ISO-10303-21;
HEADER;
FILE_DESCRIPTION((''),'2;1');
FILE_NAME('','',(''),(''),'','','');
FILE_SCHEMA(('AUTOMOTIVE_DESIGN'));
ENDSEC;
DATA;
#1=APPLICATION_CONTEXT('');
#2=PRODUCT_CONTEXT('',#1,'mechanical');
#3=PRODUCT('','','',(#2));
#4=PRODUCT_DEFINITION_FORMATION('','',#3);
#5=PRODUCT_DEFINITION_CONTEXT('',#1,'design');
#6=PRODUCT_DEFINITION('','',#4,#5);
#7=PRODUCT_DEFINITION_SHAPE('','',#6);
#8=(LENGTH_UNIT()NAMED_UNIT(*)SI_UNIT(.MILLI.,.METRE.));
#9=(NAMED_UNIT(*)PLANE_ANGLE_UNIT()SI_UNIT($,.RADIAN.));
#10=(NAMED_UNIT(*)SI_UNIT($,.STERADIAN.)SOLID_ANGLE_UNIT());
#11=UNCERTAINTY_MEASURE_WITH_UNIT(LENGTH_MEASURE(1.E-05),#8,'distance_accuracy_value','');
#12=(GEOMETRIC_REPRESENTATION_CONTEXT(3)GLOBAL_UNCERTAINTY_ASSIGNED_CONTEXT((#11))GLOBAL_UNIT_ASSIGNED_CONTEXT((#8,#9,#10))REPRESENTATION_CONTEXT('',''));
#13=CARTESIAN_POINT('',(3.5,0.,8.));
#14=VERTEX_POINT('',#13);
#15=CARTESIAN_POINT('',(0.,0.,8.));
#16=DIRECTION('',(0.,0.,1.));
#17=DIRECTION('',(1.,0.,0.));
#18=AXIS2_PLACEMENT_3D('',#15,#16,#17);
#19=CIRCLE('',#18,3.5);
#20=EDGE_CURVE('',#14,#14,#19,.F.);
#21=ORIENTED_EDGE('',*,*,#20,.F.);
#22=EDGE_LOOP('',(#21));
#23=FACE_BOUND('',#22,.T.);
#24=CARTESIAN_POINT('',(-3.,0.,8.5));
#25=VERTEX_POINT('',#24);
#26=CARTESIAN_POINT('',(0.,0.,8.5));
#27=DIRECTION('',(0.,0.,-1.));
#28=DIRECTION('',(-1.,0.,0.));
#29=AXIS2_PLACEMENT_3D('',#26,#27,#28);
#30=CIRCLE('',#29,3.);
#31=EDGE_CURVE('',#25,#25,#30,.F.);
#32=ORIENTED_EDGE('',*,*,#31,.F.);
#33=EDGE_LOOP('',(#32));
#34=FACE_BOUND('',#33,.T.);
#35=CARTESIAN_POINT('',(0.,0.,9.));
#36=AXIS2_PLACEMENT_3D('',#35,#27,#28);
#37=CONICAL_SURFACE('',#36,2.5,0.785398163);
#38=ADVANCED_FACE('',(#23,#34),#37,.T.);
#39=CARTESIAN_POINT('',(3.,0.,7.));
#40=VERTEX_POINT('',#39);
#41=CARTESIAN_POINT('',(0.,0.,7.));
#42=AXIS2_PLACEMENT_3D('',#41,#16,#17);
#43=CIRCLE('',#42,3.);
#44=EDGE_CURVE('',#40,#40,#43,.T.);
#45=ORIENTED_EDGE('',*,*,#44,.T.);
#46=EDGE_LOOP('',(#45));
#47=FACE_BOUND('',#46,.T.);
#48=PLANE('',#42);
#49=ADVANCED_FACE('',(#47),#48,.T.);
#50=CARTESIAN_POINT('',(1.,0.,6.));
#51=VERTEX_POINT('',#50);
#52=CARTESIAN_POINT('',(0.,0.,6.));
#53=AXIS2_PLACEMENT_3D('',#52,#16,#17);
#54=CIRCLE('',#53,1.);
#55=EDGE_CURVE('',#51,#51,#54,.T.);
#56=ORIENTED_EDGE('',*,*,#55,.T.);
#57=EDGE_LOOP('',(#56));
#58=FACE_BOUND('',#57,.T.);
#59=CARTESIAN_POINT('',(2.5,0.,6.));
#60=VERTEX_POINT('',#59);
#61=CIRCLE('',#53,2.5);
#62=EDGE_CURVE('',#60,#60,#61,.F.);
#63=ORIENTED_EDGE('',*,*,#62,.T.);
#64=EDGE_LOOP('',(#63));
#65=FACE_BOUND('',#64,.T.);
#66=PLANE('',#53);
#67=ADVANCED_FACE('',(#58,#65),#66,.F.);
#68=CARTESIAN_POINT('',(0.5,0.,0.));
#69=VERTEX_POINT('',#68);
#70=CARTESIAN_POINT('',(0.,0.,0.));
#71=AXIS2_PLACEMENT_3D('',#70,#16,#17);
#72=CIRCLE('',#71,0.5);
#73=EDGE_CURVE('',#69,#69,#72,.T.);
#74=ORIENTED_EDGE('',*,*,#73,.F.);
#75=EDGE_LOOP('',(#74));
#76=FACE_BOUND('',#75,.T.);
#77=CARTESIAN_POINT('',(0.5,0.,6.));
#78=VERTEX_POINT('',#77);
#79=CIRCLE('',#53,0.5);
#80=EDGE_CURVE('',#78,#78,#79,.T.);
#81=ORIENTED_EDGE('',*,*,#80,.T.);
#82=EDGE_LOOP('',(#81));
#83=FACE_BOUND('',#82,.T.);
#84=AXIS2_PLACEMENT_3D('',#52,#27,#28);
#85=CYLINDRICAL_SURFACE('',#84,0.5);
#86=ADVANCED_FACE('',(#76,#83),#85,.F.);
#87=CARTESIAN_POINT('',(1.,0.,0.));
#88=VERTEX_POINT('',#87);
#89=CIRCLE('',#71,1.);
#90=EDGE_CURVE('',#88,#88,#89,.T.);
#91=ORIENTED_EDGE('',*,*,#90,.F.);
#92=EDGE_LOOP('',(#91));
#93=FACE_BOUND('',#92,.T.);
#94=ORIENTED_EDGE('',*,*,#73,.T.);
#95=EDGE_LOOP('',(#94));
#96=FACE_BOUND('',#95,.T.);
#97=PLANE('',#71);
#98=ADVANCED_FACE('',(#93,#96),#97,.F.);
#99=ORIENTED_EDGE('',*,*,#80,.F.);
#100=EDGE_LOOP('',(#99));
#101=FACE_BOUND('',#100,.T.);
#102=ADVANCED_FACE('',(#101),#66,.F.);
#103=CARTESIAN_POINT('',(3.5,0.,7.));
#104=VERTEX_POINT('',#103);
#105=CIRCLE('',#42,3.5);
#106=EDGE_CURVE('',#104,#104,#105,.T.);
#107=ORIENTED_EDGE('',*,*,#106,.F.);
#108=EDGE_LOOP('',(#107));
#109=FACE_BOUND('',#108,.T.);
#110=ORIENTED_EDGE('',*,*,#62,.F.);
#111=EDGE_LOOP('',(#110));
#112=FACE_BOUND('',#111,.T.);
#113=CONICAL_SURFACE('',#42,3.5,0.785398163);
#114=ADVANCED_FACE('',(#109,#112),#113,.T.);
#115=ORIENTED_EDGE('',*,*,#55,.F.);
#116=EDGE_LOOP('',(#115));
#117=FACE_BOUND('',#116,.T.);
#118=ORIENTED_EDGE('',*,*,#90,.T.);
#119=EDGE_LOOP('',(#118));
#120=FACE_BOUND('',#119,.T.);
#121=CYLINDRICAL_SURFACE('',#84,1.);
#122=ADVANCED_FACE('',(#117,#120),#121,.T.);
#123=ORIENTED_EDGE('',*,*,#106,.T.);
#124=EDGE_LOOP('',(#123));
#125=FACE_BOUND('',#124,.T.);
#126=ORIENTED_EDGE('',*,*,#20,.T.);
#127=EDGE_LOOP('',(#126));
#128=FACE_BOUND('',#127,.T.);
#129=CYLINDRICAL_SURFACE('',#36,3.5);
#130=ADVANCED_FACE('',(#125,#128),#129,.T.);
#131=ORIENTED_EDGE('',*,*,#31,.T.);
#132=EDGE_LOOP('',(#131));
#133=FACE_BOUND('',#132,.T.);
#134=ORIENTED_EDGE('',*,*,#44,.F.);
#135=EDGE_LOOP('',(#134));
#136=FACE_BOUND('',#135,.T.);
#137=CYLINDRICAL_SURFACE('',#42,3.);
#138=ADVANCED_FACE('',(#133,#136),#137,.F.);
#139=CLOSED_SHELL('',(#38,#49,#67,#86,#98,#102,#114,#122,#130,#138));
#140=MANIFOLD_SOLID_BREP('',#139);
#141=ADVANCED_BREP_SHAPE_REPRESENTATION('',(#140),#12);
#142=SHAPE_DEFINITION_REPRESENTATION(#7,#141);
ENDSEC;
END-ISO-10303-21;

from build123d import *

# Parameters (mm, degrees)
ESBO_O1_R                = 1
ESBO_O1_R_2              = 0.5
RESSALTO_EXTRUS_O1_DEPTH = 6
ESBO_O3_R                = 3.5
RESSALTO_EXTRUS_O2_DEPTH = 3
ESBO_O4_R                = 3
CORTE_EXTRUS_O1_DEPTH    = 2
CHANFRO1_SIZE            = 1


with BuildPart() as part:
    # Esboço1 → Ressalto-extrusão1 (new body)
    with BuildSketch(Plane.XY):
        Circle(ESBO_O1_R)
        Circle(ESBO_O1_R_2, mode=Mode.SUBTRACT)
    extrude(amount=RESSALTO_EXTRUS_O1_DEPTH)

    # Esboço3 → Ressalto-extrusão2 (add)
    with BuildSketch(Plane.XY.offset(6)):
        Circle(ESBO_O3_R)
    extrude(amount=RESSALTO_EXTRUS_O2_DEPTH)

    # Esboço4 → Corte-extrusão1 (cut)
    with BuildSketch(Plane.XY.offset(9)):
        Circle(ESBO_O4_R)
    extrude(amount=-CORTE_EXTRUS_O1_DEPTH, mode=Mode.SUBTRACT)

    # Chanfro1
    # the kernel refuses this chamfer: 1 mm, written as the material it takes off along each edge
    with BuildSketch(Plane(origin=(0, 0, 9), x_dir=(1, 0, 0), z_dir=(0, -1, 0))) as chanfro1_piece_1:
        Polygon((3.5, -CHANFRO1_SIZE), (3.5 - CHANFRO1_SIZE, 0), (3.5, 0), align=None)
    revolve(axis=Axis((0, 0, 9), (0, 0, 1)), mode=Mode.SUBTRACT)
    with BuildSketch(Plane(origin=(0, 0, 6), x_dir=(1, 0, 0), z_dir=(0, -1, 0))) as chanfro1_piece_2:
        Polygon((3.5, CHANFRO1_SIZE), (3.5 - CHANFRO1_SIZE, 0), (3.5, 0), align=None)
    revolve(axis=Axis((0, 0, 6), (0, 0, 1)), mode=Mode.SUBTRACT)


solid = part.part
